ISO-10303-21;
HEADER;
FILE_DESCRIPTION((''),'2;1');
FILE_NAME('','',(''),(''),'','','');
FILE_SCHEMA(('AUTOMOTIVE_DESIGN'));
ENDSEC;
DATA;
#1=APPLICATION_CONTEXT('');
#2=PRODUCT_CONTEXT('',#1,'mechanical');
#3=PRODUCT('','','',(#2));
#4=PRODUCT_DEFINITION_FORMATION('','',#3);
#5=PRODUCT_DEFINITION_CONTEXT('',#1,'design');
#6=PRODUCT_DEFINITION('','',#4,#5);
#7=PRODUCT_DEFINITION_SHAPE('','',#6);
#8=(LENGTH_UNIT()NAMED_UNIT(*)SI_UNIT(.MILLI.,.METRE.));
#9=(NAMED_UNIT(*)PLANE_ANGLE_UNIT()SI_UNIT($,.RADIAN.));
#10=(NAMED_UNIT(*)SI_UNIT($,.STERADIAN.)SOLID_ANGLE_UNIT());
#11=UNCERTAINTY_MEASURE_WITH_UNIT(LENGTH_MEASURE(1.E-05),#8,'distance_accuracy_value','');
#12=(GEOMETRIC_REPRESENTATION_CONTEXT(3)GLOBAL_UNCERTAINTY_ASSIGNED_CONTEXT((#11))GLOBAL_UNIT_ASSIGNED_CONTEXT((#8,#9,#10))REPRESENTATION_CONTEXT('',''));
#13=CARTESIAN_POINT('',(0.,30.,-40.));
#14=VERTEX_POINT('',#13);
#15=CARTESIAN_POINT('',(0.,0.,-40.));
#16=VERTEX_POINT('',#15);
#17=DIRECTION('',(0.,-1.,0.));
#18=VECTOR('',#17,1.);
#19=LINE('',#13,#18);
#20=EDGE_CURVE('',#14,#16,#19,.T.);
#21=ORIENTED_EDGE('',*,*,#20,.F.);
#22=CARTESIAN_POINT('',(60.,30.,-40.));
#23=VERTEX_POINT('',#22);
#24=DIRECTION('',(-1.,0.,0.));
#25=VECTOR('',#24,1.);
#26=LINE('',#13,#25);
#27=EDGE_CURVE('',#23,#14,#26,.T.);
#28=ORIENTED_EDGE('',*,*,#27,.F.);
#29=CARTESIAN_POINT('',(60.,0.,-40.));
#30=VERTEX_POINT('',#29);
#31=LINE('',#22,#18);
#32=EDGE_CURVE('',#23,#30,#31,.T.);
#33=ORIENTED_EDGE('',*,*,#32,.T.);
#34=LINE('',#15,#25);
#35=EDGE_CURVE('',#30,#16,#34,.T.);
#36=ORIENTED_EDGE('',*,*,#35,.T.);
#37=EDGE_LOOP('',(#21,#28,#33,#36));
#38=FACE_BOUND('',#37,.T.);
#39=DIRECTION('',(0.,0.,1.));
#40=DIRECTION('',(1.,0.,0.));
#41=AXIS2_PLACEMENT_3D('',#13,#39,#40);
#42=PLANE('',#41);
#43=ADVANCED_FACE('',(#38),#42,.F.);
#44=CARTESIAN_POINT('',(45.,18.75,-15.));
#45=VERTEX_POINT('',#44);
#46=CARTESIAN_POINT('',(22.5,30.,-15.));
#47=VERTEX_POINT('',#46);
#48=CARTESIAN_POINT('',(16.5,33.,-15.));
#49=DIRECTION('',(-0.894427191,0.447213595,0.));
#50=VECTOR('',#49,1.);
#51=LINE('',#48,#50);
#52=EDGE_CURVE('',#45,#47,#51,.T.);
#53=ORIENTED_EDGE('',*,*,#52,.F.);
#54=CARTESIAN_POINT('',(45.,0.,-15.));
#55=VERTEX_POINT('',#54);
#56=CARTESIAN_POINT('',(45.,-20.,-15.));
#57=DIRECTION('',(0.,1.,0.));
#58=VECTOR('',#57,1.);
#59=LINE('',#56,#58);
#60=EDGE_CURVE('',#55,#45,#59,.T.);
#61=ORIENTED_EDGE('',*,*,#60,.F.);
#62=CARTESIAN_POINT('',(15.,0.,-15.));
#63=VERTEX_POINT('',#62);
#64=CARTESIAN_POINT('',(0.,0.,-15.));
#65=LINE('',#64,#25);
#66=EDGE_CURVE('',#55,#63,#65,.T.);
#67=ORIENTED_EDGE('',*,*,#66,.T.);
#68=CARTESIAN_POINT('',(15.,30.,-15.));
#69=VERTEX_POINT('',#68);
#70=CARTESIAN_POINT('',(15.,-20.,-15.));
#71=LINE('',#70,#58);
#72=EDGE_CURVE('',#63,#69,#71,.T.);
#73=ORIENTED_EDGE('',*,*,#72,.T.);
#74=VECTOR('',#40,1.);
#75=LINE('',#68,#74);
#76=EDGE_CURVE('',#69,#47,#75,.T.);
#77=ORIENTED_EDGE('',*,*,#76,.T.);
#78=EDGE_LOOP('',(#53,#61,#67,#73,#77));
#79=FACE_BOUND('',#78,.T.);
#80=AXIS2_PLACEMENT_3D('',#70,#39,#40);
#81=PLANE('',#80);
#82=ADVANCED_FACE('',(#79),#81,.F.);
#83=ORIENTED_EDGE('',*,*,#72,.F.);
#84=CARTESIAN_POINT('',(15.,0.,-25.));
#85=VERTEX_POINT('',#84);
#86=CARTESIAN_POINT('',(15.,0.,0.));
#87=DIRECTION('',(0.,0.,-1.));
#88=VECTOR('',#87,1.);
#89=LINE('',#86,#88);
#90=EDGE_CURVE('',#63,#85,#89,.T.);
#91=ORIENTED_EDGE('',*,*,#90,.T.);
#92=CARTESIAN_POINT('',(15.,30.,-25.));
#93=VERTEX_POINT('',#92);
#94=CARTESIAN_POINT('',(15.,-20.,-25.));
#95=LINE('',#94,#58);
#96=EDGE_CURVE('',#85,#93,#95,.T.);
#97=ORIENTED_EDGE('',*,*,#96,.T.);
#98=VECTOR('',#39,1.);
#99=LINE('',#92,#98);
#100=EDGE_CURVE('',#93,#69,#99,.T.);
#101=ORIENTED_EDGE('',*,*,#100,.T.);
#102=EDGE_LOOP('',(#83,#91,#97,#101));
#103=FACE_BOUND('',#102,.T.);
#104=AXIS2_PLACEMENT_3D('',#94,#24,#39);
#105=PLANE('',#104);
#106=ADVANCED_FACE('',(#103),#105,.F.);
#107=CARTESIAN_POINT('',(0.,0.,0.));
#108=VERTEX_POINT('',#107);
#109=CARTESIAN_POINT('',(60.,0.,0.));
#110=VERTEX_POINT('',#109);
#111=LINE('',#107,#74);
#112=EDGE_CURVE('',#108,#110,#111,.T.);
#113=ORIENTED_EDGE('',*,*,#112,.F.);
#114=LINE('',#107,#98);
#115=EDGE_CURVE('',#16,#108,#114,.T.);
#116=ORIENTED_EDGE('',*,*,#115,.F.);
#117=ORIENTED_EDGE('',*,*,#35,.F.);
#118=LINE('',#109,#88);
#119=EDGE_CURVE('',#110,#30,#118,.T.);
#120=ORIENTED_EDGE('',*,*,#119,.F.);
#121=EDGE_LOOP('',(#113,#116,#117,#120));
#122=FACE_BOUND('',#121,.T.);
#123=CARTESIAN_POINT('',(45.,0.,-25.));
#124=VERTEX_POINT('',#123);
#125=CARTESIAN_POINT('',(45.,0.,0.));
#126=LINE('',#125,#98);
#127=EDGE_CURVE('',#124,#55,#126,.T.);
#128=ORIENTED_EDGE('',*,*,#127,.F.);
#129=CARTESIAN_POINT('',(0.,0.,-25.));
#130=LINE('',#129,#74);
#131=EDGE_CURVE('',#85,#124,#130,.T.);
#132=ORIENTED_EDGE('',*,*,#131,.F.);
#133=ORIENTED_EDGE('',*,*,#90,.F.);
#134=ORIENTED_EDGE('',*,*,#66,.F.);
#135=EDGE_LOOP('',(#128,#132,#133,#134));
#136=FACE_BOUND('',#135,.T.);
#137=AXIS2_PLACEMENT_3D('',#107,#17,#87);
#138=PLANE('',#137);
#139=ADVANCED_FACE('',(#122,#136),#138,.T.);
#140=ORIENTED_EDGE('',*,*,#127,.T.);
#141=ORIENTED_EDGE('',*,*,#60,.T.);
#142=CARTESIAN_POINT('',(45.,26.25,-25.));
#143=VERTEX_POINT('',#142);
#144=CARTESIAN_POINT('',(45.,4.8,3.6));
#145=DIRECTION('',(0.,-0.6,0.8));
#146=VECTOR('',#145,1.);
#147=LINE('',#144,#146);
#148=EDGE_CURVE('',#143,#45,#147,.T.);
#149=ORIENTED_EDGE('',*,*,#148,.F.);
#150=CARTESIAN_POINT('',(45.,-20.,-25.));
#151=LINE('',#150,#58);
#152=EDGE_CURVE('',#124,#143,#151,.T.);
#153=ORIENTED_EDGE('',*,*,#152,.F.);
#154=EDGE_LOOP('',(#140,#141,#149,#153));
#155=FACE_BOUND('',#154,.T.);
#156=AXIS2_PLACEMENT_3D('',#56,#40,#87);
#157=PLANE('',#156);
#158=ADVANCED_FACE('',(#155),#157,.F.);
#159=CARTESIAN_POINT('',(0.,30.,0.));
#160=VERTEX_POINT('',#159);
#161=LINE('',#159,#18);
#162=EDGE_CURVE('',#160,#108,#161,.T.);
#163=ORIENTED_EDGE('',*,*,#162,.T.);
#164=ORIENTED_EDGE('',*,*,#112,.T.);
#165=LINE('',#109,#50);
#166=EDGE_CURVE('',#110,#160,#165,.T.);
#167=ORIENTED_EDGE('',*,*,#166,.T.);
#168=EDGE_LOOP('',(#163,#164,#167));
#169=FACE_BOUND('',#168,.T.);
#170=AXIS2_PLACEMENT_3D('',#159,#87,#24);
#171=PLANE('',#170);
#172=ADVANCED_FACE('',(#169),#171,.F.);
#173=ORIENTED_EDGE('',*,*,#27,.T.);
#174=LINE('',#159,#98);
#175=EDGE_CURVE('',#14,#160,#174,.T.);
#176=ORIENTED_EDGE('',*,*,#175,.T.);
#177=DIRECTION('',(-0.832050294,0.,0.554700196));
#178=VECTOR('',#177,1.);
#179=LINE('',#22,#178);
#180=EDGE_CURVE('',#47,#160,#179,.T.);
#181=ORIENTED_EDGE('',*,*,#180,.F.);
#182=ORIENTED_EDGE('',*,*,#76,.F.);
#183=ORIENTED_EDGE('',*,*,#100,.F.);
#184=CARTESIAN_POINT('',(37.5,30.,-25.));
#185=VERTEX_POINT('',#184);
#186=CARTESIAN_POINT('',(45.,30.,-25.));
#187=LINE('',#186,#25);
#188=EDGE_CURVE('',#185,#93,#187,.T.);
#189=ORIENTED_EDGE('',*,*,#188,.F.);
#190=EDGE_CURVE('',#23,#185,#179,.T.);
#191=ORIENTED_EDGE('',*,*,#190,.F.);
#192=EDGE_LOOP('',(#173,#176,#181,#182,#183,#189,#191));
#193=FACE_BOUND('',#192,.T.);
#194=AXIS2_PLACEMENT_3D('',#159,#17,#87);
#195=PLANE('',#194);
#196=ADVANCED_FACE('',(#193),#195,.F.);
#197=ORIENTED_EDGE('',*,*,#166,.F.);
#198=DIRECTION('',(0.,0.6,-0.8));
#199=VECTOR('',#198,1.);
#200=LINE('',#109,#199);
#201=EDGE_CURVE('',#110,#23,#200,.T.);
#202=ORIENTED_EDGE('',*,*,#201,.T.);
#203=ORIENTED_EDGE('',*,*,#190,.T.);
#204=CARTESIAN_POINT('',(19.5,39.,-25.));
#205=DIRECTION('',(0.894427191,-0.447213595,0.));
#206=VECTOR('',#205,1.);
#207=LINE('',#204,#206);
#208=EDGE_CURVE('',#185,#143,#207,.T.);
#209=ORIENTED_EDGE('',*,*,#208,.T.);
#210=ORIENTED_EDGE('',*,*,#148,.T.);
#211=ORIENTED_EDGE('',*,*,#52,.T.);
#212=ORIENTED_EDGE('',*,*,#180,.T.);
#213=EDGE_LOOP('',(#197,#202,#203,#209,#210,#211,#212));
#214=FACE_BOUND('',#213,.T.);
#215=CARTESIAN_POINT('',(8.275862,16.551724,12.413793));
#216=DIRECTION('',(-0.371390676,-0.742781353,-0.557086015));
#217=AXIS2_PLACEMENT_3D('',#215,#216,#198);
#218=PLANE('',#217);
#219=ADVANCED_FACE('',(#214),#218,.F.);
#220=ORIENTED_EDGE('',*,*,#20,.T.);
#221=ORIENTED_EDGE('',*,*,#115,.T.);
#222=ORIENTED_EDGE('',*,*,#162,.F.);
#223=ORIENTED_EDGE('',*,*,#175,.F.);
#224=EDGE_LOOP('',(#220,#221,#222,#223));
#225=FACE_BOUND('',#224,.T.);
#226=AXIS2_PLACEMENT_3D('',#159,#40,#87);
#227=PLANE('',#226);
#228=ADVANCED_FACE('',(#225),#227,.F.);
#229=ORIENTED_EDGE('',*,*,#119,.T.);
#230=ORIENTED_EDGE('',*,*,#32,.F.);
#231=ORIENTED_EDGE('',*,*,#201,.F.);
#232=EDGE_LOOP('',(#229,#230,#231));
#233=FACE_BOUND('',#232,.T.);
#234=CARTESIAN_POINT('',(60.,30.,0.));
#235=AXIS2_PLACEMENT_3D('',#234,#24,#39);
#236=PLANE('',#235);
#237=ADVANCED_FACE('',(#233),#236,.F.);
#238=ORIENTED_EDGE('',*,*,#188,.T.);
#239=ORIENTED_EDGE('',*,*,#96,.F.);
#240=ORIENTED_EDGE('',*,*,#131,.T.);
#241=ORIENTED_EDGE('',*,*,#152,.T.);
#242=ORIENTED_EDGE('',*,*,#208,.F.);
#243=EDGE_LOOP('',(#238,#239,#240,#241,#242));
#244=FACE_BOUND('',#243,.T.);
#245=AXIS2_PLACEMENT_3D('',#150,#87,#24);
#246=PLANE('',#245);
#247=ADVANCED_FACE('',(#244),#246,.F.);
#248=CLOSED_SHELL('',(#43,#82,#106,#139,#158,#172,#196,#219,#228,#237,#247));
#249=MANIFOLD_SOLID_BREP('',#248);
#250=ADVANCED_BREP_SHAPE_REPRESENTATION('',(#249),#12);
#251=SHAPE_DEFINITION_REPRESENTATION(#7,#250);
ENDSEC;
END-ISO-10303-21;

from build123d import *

# Parameters (mm, degrees)
SKETCH1_W           = 60
SKETCH1_H           = 40
BOSS_EXTRUDE1_DEPTH = 30
CUT_LOFT2_START     = -14
CUT_LOFT2_DEPTH     = 69
SKETCH9_W           = 30
SKETCH9_H           = 10
CUT_EXTRUDE4_DEPTH  = 50


with BuildPart() as part:
    # Sketch1 → Boss-Extrude1 (new body)
    with BuildSketch(Plane(origin=(0, 0, 0), x_dir=(1, 0, 0), z_dir=(0, 1, 0))):
        with Locations((30, 20)):
            Rectangle(SKETCH1_W, SKETCH1_H)
    extrude(amount=BOSS_EXTRUDE1_DEPTH)

    # Cut-Loft2: read off the stored shape, not the designer's step
    # Cut-Loft2 outline → Cut-Loft2 (cut)
    with BuildSketch(Plane(origin=(0, 0, 0), x_dir=(0.4472135954999584, 0.8944271909999156, 0), z_dir=(0.8944271909999156, -0.4472135954999584, 0)).offset(CUT_LOFT2_START)):
        Polygon((55, 0), (26.83281573, 0), (53.66563146, -40), (54.336451853, -41), (55, -41), align=None)
    extrude(amount=CUT_LOFT2_DEPTH, mode=Mode.SUBTRACT)

    # Sketch9 → Cut-Extrude4 (cut)
    with BuildSketch(Plane(origin=(0, 30, 0), x_dir=(1, 0, 0), z_dir=(0, 1, 0))):
        with Locations((30, 20)):
            Rectangle(SKETCH9_W, SKETCH9_H)
    extrude(amount=-CUT_EXTRUDE4_DEPTH, mode=Mode.SUBTRACT)


solid = part.part
